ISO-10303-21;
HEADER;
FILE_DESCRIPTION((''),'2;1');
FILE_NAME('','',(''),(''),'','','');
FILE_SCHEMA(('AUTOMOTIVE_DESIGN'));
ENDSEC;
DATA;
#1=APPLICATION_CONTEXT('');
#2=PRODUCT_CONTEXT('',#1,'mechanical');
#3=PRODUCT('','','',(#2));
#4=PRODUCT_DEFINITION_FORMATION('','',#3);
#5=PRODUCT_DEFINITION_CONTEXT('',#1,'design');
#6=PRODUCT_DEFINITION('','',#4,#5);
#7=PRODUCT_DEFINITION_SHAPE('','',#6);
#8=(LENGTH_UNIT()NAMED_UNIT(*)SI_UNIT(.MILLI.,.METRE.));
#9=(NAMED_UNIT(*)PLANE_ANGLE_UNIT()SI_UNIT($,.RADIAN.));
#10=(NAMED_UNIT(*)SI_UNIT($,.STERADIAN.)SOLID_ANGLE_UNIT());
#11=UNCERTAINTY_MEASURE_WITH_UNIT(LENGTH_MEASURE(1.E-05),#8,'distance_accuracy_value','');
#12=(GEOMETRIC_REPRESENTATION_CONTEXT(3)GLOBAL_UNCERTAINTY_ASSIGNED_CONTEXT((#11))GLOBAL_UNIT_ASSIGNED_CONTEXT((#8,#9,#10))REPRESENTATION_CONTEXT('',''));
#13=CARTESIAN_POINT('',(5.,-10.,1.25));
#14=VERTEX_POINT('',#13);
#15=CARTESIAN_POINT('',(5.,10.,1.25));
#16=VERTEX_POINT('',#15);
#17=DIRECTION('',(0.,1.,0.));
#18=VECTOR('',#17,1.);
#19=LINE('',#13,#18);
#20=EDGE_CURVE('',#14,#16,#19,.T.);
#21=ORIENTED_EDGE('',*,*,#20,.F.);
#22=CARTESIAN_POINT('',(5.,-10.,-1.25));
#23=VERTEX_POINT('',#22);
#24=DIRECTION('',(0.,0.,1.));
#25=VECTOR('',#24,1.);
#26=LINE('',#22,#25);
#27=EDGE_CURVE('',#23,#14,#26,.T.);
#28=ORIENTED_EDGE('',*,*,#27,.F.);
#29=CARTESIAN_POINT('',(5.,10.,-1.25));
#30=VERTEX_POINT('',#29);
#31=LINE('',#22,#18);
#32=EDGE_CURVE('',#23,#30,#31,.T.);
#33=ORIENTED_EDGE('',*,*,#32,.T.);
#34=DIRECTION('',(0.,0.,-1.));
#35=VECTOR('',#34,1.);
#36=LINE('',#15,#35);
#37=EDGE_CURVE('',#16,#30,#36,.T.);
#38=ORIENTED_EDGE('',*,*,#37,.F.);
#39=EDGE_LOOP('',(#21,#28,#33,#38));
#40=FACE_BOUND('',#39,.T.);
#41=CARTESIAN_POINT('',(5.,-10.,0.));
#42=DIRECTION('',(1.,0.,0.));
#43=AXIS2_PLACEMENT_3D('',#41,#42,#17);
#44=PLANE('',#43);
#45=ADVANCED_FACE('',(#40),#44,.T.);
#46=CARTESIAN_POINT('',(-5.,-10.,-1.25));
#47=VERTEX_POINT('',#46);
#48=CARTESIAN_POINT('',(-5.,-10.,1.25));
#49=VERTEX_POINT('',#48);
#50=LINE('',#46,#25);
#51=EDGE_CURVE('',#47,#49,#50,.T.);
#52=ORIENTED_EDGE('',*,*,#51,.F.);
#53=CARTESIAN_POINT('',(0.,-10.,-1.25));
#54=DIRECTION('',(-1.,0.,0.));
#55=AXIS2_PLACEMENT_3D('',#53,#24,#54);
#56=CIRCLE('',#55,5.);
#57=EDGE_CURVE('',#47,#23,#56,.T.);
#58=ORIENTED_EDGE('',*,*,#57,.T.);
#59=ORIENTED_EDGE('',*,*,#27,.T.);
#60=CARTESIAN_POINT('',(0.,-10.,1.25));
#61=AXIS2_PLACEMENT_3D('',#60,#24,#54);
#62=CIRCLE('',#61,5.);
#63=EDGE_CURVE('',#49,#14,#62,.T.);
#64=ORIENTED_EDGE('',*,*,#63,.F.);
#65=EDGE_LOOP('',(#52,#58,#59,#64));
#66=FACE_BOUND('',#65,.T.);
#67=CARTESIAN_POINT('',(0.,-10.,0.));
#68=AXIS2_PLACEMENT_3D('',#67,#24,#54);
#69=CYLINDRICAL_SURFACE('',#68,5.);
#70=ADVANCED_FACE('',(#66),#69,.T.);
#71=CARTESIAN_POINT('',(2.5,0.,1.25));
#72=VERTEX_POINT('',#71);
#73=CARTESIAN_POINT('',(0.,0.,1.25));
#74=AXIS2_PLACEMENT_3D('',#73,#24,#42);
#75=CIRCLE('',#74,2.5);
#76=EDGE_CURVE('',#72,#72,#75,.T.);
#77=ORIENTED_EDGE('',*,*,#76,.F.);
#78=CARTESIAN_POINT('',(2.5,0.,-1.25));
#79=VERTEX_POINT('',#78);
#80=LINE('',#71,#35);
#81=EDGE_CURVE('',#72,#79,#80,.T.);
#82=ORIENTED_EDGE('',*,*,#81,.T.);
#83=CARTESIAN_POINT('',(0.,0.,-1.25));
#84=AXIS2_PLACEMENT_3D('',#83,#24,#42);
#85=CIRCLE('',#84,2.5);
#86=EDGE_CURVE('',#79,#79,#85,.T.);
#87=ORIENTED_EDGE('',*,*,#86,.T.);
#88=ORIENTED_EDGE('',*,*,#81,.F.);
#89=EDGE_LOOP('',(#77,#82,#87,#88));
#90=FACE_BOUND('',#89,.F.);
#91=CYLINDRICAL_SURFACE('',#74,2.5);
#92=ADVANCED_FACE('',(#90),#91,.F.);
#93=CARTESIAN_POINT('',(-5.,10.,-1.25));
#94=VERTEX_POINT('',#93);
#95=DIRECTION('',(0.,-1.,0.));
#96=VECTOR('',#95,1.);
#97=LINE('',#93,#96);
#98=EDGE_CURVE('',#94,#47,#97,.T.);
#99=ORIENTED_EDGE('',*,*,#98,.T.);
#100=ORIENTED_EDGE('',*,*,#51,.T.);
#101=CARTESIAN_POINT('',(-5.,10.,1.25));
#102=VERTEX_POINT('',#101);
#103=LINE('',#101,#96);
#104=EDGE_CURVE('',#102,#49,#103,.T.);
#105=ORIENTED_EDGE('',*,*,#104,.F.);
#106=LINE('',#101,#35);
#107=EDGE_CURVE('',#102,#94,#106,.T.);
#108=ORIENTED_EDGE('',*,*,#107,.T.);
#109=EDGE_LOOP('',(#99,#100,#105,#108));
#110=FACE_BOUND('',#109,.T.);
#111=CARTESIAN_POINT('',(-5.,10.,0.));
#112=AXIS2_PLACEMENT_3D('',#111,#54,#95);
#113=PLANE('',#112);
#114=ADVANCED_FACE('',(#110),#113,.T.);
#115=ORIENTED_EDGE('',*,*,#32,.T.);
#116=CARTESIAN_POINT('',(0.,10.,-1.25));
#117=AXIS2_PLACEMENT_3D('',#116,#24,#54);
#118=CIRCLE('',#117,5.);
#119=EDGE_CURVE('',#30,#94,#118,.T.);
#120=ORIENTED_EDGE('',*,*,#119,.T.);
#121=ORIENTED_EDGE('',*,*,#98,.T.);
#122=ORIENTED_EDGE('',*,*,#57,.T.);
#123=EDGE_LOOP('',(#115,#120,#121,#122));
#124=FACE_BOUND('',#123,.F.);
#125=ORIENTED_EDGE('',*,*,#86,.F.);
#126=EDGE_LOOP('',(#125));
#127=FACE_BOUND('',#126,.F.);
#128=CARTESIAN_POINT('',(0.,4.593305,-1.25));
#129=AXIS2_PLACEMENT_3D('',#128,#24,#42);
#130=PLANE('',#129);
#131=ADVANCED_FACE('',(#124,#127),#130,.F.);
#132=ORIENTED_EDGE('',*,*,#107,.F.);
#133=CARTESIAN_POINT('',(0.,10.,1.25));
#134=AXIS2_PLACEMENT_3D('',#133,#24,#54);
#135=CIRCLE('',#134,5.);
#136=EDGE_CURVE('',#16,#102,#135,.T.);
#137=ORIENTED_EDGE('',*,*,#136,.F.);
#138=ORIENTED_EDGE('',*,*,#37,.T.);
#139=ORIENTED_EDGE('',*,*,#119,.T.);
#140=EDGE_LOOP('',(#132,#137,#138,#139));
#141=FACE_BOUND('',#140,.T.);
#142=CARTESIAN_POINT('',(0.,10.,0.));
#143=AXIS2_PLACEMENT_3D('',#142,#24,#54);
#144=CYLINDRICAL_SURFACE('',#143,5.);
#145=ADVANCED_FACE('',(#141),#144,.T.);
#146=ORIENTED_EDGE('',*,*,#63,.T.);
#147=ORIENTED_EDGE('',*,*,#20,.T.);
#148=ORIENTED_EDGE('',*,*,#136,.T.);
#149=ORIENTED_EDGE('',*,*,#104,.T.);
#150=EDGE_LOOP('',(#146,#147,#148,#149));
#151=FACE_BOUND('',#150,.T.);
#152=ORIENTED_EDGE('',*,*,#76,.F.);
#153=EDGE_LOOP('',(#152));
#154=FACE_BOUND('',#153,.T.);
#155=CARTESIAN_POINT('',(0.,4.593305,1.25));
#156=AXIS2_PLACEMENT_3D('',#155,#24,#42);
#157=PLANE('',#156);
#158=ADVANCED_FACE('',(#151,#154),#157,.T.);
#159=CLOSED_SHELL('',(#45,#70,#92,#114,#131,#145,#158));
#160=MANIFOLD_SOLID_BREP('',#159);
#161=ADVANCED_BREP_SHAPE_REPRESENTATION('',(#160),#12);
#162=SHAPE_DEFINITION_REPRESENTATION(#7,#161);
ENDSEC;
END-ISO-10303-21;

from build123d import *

# Parameters (mm, degrees)
F1_DEPTH = 1.25
F2_R     = 2.5
F3_DEPTH = 2.501


# Not quite as in the source:
# - a feature names something its author has since deleted; it is built from what else it names


with BuildPart() as f1:
    # F0 (on Top) → F1 (new body, symmetric)
    with BuildSketch(Plane.XY):
        with BuildLine():
            Line((-5, 10), (-5, 0))
            Line((-5, 0), (5, 0))
            Line((5, 0), (5, 10))
            ThreePointArc((5, 10), (0, 5), (-5, 10))
        make_face()
        with BuildLine():
            Line((5, 0), (-5, 0))
            Line((-5, 0), (-5, -10))
            ThreePointArc((-5, -10), (0, -5), (5, -10))
            Line((5, -10), (5, 0))
        make_face()
        with BuildLine():
            ThreePointArc((5, 10), (0, 15), (-5, 10))
            ThreePointArc((-5, 10), (0, 5), (5, 10))
        make_face()
        with BuildLine():
            ThreePointArc((5, -10), (0, -5), (-5, -10))
            ThreePointArc((-5, -10), (0, -15), (5, -10))
        make_face()
    extrude(amount=F1_DEPTH, both=True)

    # F2 (on face) → F3 (cut, through all)
    with BuildSketch(Plane.XY.offset(1.25)):
        Circle(F2_R)
    extrude(amount=-F3_DEPTH, mode=Mode.SUBTRACT)


solid = f1.part
